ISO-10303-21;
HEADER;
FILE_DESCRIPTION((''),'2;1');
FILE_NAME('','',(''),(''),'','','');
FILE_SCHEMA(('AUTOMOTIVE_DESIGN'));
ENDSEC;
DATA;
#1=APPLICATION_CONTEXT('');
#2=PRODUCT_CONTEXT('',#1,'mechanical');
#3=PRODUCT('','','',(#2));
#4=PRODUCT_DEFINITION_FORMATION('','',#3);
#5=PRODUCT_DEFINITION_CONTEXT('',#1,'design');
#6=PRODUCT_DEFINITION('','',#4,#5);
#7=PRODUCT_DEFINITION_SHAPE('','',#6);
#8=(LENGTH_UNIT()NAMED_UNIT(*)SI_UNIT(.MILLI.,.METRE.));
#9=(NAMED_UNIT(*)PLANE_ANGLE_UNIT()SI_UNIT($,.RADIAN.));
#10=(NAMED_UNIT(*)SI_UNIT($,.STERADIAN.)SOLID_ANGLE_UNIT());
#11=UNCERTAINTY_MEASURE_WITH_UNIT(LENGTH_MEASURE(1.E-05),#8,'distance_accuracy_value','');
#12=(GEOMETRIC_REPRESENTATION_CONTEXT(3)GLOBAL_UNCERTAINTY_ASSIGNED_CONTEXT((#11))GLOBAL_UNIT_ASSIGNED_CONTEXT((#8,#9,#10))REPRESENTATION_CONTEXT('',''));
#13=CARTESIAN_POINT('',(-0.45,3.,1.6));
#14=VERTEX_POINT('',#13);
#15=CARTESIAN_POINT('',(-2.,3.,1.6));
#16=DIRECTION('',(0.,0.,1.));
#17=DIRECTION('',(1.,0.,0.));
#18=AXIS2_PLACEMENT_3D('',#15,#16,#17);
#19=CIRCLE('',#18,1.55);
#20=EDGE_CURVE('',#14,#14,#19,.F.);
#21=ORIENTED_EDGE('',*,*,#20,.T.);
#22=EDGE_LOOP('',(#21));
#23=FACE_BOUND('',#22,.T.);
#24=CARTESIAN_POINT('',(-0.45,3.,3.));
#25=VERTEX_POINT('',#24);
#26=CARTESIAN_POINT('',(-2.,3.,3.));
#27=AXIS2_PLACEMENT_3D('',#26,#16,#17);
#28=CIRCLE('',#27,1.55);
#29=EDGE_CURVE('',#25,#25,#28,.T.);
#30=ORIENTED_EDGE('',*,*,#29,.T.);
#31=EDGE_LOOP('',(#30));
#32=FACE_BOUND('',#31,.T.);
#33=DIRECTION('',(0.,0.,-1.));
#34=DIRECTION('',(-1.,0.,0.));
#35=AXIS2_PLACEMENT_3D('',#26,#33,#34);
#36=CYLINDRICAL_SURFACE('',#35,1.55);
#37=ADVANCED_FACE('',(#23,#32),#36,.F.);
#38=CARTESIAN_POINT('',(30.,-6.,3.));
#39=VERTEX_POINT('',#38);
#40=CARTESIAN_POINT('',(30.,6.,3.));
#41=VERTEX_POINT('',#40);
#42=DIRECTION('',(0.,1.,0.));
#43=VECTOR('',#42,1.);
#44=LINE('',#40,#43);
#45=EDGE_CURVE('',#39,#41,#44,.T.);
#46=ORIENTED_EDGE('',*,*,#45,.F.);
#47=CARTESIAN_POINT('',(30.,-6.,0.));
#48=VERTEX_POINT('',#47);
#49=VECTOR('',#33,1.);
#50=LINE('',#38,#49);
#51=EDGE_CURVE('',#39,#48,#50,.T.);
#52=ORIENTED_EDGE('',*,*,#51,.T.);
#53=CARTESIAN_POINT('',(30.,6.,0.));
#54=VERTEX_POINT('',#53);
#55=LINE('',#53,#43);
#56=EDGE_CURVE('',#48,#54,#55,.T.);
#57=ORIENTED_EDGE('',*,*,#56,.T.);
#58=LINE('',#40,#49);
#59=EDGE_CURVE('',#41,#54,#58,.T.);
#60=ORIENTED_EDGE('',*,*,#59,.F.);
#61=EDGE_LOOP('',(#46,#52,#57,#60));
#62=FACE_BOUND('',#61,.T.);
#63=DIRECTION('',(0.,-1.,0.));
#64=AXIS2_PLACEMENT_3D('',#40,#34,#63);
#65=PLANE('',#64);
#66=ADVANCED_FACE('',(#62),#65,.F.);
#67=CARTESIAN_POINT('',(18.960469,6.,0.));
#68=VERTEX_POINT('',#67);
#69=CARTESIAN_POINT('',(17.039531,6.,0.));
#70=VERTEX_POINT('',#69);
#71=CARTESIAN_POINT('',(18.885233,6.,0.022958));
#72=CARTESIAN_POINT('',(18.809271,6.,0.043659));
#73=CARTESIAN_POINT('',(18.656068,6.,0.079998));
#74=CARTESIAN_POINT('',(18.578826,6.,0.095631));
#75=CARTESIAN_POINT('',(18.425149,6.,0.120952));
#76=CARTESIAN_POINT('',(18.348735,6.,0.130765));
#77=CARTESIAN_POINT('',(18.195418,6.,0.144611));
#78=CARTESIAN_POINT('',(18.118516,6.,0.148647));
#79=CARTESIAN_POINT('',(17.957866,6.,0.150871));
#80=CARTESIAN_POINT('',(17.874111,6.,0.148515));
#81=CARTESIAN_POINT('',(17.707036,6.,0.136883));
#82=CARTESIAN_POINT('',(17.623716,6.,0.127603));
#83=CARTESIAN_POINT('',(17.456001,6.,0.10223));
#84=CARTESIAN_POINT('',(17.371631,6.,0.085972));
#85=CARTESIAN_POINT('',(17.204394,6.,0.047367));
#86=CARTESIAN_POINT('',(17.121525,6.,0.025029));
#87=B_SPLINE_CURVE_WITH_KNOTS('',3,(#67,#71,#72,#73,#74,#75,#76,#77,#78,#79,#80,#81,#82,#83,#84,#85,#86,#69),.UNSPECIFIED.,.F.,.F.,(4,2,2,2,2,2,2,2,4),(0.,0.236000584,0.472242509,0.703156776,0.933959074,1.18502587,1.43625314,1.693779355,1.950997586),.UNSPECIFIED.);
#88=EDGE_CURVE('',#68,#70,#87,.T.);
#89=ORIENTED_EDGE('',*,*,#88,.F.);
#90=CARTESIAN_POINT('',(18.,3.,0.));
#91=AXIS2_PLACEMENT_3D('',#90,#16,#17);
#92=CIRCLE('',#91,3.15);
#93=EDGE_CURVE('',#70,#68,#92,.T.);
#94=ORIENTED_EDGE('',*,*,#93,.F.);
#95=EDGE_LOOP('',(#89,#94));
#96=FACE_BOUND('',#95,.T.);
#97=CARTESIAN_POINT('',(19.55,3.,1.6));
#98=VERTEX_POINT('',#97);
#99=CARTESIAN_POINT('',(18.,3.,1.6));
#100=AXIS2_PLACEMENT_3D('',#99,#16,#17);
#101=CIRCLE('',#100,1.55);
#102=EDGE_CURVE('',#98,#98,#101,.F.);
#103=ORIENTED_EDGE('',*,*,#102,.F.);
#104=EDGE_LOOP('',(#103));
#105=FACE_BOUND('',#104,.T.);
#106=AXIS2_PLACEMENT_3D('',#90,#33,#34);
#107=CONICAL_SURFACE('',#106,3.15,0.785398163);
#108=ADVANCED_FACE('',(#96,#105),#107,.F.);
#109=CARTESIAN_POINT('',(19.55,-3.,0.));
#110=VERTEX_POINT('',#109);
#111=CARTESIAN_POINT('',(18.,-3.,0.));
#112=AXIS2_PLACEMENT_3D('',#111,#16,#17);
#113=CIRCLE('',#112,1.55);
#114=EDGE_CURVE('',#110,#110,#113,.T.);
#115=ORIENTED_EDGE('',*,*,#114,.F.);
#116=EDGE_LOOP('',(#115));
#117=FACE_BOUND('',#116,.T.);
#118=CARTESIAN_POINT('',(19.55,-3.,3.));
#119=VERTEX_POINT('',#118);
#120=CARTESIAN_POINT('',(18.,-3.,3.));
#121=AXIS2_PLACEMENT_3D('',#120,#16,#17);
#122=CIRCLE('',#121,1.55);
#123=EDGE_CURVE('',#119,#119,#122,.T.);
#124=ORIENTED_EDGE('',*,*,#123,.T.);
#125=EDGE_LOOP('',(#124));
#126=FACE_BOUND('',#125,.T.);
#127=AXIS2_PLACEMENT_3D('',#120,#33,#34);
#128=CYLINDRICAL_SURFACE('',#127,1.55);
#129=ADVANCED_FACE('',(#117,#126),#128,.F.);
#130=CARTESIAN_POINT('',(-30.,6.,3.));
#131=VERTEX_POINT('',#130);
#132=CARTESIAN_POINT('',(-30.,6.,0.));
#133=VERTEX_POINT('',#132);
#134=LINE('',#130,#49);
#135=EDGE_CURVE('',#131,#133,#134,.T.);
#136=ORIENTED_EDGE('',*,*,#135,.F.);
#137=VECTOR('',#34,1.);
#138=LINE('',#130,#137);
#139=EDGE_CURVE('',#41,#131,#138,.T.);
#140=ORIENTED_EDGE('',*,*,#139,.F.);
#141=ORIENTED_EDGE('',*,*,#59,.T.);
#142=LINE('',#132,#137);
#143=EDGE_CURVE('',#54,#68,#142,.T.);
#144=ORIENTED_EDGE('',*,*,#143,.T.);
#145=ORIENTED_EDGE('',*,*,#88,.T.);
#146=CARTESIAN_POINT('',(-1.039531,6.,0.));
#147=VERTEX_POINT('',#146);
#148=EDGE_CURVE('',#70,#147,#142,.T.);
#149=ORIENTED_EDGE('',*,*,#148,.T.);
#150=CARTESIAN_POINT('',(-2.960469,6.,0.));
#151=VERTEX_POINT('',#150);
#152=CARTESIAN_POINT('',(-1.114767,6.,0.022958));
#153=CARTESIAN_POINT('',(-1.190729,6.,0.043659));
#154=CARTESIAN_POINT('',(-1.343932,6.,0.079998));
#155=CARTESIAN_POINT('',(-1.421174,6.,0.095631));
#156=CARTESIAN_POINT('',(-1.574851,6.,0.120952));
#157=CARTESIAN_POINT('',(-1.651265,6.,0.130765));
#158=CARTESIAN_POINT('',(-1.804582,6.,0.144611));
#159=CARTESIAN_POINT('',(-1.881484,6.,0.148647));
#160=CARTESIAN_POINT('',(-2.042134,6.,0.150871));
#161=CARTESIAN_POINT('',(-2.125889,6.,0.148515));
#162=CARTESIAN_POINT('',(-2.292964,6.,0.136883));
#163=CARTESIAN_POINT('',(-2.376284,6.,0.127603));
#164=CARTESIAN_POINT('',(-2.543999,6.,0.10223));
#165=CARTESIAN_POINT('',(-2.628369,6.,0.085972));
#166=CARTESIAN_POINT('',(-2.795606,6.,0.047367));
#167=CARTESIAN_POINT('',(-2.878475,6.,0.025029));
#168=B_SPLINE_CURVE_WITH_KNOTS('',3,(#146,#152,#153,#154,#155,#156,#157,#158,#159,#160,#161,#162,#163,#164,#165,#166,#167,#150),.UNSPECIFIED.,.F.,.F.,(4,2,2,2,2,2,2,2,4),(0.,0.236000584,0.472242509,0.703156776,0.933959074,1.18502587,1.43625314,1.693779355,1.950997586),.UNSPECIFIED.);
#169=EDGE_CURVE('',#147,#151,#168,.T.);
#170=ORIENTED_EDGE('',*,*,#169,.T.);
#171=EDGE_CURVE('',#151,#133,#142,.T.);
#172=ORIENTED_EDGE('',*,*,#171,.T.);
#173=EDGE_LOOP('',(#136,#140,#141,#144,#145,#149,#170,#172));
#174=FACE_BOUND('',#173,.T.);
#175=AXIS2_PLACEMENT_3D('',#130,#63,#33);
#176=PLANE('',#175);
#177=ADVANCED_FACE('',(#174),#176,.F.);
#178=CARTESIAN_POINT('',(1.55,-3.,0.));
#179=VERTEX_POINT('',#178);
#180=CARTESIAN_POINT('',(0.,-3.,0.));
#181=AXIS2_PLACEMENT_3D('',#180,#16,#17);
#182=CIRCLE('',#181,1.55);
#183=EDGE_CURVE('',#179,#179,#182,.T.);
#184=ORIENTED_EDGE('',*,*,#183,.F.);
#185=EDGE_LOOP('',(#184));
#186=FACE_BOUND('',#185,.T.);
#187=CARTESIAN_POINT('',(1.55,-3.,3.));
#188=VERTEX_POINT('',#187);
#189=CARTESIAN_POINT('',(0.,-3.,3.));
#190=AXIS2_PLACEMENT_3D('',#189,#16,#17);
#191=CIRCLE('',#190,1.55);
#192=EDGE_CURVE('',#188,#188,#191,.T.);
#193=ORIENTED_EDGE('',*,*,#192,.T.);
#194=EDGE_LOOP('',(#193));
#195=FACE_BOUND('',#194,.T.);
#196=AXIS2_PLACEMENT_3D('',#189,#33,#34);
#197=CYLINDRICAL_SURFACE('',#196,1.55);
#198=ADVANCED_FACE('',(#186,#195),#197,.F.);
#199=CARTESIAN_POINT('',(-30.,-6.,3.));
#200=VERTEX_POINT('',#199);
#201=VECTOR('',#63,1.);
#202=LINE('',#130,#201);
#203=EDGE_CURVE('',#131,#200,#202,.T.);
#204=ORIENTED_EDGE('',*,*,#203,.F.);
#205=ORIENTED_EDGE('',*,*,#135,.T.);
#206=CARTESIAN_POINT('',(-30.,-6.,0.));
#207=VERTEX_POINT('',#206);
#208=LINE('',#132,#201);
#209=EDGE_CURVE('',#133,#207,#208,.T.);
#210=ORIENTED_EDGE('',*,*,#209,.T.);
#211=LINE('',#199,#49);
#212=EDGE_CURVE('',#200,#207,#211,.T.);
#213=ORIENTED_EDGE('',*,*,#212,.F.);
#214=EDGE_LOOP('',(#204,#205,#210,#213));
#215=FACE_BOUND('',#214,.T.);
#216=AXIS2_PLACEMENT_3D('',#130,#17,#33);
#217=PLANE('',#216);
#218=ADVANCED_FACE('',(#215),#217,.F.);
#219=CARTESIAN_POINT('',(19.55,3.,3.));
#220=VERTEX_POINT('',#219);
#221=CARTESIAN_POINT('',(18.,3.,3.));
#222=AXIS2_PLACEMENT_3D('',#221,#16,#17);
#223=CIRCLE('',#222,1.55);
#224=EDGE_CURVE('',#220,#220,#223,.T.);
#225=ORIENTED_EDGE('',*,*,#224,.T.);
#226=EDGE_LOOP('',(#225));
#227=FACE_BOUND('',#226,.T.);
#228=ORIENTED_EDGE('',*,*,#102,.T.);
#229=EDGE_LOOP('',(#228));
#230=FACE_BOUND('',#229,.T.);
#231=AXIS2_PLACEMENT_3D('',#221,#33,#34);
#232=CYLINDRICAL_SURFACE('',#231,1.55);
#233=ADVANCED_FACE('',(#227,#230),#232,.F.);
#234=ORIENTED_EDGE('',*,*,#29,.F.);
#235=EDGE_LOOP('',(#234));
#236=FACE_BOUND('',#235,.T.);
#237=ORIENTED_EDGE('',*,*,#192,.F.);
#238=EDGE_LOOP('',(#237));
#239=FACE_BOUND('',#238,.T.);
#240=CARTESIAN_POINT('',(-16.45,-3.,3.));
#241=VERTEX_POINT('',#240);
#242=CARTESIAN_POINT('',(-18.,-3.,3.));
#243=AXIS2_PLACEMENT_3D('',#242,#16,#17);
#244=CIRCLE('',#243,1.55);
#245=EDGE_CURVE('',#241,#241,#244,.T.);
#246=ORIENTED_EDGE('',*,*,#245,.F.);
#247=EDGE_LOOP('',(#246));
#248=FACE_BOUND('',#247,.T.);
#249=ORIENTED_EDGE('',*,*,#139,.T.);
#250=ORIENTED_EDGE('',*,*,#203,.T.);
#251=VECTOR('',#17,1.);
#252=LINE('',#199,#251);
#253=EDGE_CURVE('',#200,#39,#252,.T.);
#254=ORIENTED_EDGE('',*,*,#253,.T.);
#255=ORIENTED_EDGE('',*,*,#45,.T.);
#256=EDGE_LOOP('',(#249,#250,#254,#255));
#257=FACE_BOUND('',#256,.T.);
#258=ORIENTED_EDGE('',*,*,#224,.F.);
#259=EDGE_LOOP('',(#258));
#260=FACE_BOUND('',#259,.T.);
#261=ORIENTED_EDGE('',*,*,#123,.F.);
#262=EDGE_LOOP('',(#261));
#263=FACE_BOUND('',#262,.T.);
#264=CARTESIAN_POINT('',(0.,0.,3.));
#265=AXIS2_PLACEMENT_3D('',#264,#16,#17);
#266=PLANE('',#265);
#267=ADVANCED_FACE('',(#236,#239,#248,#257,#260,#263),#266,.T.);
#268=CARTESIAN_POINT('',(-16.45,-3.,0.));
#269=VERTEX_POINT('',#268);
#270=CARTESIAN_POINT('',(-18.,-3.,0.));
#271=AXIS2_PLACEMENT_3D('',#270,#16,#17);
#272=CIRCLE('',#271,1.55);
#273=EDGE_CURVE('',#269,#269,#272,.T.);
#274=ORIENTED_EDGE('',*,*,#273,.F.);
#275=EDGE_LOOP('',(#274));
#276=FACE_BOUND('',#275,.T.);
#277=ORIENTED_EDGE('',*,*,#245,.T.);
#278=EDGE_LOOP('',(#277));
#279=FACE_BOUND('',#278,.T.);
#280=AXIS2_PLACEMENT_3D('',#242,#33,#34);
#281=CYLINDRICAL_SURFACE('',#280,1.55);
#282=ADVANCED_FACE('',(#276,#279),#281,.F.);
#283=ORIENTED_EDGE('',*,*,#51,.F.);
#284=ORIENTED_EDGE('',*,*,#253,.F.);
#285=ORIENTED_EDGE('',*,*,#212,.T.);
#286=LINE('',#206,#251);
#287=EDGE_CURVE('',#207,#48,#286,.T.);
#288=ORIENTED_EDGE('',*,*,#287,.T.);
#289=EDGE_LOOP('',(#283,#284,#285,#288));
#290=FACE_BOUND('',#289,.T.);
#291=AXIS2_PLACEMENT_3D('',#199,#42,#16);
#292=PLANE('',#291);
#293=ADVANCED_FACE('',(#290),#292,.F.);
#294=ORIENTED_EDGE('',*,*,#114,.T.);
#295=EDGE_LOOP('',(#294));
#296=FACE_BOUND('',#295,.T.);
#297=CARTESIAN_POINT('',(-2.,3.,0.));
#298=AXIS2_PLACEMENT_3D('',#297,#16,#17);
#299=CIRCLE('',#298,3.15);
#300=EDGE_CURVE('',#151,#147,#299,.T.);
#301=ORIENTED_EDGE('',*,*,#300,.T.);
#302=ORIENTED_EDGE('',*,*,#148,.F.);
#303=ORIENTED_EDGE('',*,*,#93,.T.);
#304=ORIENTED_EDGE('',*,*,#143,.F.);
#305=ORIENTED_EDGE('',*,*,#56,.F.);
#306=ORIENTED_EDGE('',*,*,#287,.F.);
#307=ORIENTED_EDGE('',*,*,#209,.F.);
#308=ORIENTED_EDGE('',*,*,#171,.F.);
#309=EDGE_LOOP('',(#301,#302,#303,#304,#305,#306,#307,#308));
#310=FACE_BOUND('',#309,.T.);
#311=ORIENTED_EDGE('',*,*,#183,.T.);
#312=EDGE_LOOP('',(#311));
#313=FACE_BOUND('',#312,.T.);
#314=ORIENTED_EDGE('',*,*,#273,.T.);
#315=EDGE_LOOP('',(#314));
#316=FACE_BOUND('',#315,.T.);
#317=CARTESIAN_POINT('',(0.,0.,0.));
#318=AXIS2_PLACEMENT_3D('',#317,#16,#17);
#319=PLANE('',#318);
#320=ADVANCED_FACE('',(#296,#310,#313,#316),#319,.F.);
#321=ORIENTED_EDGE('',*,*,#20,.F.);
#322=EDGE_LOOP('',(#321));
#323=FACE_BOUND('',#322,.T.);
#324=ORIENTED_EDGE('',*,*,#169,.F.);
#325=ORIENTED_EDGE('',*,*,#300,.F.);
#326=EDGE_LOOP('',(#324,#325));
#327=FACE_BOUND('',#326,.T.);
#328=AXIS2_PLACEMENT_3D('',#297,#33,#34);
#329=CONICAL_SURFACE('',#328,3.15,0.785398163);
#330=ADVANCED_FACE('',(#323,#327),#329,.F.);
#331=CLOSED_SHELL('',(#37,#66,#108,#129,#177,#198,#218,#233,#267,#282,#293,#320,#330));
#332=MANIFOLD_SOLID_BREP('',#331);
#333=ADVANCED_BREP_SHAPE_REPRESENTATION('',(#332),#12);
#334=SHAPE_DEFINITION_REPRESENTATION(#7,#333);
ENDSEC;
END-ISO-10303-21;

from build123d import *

# Parameters (mm, degrees)
SKETCH_1_W      = 60
SKETCH_1_H      = 12
SKETCH_1_R      = 1.55
EXTRUDE_1_DEPTH = 3
CHAMFER_1_SIZE  = 1.6


with BuildPart() as part:
    # 草图1 → 凸台-拉伸1 (new body)
    with BuildSketch(Plane.XY):
        Rectangle(SKETCH_1_W, SKETCH_1_H)
        with Locations((18, 3)):
            Circle(SKETCH_1_R, mode=Mode.SUBTRACT)
        with Locations((-2, 3)):
            Circle(SKETCH_1_R, mode=Mode.SUBTRACT)
        with Locations((0, -3)):
            Circle(SKETCH_1_R, mode=Mode.SUBTRACT)
        with Locations((18, -3)):
            Circle(SKETCH_1_R, mode=Mode.SUBTRACT)
        with Locations((-18, -3)):
            Circle(SKETCH_1_R, mode=Mode.SUBTRACT)
    extrude(amount=EXTRUDE_1_DEPTH)

    # 倒角1
    # the kernel refuses this chamfer: 1.6 mm, written as the material it takes off along each edge
    with BuildSketch(Plane(origin=(18, 3, 0), x_dir=(1, 0, 0), z_dir=(0, -1, 0))) as chamfer_1_piece_1:
        Polygon((1.55, CHAMFER_1_SIZE), (1.55 + CHAMFER_1_SIZE, 0), (1.55, 0), align=None)
    revolve(axis=Axis((18, 3, 0), (0, 0, 1)), mode=Mode.SUBTRACT)
    with BuildSketch(Plane(origin=(-2, 3, 0), x_dir=(1, 0, 0), z_dir=(0, -1, 0))) as chamfer_1_piece_2:
        Polygon((1.55, CHAMFER_1_SIZE), (1.55 + CHAMFER_1_SIZE, 0), (1.55, 0), align=None)
    revolve(axis=Axis((-2, 3, 0), (0, 0, 1)), mode=Mode.SUBTRACT)


solid = part.part
